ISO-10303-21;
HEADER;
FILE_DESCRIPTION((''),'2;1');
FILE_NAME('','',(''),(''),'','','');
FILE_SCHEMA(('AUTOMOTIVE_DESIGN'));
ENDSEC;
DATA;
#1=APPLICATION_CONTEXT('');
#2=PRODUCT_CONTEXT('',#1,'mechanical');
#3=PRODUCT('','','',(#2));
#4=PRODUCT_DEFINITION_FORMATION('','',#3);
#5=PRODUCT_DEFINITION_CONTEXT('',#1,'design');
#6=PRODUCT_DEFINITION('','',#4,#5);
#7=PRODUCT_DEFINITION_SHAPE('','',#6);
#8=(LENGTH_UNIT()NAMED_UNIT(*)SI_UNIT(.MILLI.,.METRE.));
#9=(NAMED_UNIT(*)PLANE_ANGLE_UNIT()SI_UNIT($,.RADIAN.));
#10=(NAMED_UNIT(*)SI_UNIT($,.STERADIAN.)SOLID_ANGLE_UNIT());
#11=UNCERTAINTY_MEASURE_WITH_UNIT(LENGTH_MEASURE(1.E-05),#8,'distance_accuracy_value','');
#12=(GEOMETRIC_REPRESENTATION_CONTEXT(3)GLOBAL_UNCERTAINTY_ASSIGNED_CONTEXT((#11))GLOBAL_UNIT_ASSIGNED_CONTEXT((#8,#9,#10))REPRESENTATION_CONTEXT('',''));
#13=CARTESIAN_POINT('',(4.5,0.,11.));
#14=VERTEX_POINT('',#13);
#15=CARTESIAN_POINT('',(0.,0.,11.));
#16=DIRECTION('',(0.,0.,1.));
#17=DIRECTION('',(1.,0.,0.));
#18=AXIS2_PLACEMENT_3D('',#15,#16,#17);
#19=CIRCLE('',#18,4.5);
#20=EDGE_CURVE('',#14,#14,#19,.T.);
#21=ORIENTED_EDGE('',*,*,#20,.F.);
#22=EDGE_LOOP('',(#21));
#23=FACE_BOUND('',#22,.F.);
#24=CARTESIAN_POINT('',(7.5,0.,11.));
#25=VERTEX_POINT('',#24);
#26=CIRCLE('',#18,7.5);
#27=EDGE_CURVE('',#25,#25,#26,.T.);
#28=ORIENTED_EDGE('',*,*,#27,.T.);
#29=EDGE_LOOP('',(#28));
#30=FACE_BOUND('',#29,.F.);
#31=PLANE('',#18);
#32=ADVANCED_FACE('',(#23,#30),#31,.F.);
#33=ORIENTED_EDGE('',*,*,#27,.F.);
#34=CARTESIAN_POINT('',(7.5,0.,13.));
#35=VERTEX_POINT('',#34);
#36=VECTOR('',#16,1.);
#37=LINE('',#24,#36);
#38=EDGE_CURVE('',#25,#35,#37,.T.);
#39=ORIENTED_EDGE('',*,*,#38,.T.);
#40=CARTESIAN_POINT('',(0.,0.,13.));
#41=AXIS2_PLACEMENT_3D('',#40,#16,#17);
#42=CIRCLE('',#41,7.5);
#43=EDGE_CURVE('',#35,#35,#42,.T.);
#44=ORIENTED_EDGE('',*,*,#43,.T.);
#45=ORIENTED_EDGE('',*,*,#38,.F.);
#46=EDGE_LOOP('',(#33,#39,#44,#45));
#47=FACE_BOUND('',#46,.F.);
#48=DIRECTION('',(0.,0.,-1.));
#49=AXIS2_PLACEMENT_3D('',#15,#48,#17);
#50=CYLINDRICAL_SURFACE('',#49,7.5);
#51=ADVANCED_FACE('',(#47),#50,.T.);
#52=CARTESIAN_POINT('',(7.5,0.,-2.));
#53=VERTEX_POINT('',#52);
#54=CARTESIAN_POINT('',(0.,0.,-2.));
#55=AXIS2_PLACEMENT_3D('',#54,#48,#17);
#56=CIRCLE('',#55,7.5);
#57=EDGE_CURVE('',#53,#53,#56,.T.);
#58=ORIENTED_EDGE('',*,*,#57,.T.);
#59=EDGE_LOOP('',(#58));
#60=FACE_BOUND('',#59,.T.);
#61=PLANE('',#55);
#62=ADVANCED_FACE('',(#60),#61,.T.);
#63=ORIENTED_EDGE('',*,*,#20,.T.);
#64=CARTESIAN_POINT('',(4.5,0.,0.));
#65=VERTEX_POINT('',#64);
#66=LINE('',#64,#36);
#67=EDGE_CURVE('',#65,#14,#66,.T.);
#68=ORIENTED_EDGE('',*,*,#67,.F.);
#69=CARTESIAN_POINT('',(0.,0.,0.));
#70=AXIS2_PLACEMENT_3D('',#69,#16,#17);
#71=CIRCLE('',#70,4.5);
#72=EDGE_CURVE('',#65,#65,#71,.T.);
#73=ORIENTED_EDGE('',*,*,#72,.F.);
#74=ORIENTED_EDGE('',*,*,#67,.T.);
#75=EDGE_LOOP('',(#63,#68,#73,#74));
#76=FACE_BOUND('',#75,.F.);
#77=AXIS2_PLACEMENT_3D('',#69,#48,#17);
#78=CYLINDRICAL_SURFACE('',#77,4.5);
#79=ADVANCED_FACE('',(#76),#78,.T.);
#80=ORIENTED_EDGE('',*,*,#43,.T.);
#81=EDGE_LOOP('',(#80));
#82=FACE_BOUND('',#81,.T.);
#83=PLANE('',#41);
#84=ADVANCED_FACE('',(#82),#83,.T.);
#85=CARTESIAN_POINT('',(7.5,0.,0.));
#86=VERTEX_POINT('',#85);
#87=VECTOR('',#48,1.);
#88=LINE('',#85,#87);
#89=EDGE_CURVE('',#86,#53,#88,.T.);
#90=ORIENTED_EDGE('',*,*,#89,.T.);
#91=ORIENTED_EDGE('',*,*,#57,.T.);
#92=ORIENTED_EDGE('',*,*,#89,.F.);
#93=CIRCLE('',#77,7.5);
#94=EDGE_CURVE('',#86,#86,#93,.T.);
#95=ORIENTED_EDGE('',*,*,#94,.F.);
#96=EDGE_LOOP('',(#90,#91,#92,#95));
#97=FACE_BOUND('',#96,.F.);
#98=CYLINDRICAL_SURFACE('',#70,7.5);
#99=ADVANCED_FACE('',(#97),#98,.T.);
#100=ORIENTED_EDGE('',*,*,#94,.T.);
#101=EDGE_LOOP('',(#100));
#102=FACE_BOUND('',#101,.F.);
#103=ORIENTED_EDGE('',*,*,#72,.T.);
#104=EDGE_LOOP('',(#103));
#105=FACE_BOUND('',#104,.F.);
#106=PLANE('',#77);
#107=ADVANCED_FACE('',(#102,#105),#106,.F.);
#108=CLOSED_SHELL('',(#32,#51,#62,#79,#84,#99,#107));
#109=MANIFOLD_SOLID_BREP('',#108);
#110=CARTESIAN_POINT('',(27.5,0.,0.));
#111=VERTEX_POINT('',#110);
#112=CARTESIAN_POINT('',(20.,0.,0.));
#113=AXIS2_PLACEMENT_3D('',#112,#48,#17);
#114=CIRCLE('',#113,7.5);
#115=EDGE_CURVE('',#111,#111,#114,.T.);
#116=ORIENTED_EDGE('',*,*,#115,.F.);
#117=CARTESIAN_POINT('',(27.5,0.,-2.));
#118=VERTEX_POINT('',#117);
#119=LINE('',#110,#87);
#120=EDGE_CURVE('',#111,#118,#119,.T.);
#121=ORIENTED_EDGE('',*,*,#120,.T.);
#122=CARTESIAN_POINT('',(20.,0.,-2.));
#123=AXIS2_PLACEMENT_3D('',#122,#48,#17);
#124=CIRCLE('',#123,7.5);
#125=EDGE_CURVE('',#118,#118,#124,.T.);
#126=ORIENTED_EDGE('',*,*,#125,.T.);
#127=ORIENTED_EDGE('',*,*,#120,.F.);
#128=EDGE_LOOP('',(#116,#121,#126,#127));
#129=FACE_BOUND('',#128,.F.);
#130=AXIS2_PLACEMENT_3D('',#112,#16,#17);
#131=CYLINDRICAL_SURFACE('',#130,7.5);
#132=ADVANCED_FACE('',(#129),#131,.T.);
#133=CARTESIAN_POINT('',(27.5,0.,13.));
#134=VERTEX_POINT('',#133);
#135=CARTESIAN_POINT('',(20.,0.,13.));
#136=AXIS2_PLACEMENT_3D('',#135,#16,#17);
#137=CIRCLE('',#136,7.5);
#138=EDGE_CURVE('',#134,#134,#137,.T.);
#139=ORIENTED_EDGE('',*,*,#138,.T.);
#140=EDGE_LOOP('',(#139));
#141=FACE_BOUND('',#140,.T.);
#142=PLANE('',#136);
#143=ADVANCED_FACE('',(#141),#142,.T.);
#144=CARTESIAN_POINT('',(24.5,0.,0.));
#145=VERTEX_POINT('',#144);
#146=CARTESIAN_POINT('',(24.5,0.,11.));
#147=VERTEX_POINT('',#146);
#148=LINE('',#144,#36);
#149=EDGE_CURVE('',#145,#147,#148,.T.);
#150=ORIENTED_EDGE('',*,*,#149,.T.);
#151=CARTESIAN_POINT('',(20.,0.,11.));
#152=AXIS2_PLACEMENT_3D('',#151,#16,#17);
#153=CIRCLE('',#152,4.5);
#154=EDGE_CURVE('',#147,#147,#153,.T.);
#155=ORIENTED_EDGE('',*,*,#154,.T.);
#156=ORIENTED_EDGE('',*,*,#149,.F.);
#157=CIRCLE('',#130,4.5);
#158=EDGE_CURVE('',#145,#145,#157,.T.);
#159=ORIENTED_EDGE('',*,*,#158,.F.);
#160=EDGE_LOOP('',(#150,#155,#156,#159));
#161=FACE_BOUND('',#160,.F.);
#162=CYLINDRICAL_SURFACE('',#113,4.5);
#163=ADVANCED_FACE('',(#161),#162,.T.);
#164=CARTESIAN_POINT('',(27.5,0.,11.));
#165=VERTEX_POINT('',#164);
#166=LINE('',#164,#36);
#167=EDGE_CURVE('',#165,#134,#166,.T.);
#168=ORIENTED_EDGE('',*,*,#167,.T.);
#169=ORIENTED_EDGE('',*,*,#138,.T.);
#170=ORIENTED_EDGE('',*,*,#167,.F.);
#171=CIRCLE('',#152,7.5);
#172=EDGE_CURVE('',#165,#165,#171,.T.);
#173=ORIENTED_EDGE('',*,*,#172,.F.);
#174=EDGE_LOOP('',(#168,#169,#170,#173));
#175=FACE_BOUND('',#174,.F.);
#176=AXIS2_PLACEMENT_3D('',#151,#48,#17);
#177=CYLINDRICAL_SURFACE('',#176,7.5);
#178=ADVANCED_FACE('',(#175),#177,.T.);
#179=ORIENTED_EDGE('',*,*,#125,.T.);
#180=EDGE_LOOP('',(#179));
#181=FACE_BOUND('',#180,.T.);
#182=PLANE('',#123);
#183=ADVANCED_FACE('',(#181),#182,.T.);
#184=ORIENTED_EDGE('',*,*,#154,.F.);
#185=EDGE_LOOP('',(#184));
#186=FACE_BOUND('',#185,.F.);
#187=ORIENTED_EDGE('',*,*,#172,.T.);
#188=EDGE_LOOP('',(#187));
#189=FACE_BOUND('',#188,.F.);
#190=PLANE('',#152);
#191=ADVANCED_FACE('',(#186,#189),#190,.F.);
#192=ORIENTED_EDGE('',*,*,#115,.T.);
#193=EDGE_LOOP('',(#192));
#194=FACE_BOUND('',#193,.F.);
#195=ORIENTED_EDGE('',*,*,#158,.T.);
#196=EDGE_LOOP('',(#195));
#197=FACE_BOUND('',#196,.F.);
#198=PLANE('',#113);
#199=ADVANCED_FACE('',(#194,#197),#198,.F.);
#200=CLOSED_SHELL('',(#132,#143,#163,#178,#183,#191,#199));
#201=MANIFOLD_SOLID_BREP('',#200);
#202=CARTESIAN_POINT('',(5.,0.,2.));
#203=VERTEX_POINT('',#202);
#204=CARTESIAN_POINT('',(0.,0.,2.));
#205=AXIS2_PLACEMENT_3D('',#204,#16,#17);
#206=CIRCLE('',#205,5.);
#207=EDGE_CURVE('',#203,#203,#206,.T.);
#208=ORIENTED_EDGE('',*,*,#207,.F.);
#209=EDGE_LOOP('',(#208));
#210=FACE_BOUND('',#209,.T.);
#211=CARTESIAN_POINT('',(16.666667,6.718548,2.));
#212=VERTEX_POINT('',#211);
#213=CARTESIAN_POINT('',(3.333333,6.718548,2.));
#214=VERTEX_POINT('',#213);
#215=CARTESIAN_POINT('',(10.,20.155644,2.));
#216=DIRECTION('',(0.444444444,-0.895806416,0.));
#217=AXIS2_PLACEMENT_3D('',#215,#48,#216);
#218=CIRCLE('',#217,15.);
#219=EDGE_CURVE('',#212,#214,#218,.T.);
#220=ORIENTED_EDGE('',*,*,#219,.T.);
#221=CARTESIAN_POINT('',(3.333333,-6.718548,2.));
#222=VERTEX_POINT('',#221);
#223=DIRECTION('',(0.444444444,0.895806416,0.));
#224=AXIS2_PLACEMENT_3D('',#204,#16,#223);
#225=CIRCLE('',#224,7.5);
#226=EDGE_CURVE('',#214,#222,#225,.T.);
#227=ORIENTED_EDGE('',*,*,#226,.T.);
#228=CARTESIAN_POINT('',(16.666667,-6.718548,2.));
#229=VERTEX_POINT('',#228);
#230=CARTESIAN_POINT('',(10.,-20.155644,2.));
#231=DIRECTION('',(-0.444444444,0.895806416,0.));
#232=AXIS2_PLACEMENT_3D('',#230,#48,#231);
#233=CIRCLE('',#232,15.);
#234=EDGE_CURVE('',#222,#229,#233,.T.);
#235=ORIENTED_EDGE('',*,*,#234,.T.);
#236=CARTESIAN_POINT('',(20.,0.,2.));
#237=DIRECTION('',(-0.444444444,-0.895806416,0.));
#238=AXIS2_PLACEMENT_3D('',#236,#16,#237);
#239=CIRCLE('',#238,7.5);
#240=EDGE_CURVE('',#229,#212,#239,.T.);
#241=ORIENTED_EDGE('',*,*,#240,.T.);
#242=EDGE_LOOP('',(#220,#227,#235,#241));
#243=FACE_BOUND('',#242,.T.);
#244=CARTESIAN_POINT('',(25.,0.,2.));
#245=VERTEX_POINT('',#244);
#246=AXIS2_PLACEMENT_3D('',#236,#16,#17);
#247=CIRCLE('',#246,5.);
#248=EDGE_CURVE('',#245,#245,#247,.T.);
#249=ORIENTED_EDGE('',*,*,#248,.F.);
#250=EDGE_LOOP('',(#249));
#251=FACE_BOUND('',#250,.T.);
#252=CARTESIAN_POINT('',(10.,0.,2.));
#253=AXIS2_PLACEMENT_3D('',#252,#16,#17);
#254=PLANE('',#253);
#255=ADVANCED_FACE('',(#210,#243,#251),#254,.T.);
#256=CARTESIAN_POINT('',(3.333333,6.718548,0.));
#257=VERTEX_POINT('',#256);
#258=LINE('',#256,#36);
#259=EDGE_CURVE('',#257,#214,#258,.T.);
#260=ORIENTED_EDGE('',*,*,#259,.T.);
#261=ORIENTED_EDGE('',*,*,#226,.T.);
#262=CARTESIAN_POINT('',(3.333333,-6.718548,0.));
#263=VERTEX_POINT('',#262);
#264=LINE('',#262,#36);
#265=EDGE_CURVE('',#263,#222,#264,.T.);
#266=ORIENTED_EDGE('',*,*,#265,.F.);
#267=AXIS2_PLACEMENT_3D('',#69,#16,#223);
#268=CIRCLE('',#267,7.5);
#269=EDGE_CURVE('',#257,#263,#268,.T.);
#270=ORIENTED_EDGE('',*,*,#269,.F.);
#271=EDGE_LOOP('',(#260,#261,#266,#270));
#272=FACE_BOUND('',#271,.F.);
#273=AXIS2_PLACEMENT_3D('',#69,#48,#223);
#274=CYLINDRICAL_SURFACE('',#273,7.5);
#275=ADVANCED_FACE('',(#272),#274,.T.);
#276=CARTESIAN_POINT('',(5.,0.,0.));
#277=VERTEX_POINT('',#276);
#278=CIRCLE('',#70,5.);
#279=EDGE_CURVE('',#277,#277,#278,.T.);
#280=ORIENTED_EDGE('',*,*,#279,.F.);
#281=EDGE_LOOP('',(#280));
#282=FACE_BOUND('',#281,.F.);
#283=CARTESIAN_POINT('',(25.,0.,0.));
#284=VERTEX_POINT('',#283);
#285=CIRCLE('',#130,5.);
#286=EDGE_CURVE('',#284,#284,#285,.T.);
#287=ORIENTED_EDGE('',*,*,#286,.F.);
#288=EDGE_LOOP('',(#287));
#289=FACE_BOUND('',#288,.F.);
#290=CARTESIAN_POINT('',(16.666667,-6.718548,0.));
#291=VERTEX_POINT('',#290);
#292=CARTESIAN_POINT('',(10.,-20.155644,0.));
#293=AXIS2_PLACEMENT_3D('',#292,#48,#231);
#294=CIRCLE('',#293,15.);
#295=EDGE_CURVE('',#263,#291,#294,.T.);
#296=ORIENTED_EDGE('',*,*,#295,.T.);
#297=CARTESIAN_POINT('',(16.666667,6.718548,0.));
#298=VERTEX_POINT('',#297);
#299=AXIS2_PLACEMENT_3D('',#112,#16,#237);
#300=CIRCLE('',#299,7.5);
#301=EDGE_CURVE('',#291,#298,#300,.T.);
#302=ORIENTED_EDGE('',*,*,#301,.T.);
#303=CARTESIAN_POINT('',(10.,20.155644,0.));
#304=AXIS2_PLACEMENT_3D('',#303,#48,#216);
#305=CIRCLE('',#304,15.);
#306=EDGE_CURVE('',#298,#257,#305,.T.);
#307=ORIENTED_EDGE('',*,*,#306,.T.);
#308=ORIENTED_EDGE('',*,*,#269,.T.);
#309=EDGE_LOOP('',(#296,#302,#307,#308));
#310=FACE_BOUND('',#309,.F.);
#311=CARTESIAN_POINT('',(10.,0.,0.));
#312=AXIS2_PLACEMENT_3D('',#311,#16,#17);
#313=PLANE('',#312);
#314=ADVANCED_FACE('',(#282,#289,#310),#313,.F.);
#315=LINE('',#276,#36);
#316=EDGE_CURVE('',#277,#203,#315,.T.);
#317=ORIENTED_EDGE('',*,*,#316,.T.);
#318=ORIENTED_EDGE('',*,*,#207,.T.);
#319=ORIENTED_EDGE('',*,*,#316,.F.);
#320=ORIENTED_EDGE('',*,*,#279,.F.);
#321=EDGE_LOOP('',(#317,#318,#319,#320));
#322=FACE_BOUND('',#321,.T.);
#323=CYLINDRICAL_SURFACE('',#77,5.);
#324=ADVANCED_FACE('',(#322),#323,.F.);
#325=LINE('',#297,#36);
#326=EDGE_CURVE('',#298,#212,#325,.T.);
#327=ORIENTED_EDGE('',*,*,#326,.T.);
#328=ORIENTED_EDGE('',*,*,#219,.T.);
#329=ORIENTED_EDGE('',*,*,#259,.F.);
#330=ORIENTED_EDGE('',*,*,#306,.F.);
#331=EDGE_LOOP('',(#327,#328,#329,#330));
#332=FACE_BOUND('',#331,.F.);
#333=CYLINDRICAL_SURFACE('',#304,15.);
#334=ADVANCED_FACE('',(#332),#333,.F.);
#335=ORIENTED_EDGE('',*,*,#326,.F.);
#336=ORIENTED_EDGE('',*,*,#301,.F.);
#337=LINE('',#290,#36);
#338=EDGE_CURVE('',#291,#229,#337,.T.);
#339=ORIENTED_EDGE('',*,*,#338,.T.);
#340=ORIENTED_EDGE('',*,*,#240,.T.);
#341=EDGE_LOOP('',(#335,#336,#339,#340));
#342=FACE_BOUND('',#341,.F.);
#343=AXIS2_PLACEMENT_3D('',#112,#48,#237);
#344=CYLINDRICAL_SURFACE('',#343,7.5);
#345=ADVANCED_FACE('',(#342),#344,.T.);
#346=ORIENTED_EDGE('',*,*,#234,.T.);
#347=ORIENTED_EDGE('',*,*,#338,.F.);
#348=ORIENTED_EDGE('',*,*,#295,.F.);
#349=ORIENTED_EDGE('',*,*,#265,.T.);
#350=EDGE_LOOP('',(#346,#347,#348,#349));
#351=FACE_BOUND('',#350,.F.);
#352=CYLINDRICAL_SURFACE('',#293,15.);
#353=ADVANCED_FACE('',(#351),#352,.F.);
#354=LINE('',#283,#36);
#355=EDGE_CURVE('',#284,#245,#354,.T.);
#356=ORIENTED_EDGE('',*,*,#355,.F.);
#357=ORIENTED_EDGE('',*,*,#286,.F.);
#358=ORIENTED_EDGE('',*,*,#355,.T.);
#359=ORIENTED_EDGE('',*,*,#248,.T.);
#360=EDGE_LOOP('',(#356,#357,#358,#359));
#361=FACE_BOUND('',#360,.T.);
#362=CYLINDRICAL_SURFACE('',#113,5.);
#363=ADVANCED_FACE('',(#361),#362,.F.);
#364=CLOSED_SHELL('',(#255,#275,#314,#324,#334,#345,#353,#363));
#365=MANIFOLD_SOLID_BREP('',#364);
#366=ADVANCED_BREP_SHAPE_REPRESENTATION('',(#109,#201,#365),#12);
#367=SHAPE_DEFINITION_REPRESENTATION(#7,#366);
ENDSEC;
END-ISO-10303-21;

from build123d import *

# Parameters (mm, degrees)
F0_R     = 5
F1_DEPTH = 2
F2_R     = 4.5
F3_DEPTH = 11
F4_R     = 7.5
F5_DEPTH = 2
F6_R     = 7.5
F7_DEPTH = 2


with BuildPart() as f1:
    # F0 (on Top) → F1 (new body)
    with BuildSketch(Plane.XY):
        with BuildLine():
            ThreePointArc((16.6666666667, 6.7185481236), (10, 5.1556443707), (3.3333333333, 6.7185481236))
            ThreePointArc((3.3333333333, 6.7185481236), (-7.5, 0), (3.3333333333, -6.7185481236))
            ThreePointArc((3.3333333333, -6.7185481236), (10, -5.1556443707), (16.6666666667, -6.7185481236))
            ThreePointArc((16.6666666667, -6.7185481236), (27.5, 0), (16.6666666667, 6.7185481236))
        make_face()
        Circle(F0_R, mode=Mode.SUBTRACT)
        with Locations((20, 0)):
            Circle(F0_R, mode=Mode.SUBTRACT)
    extrude(amount=F1_DEPTH)


with BuildPart() as f3:
    # F2 (on Top) → F3 (new body)
    with BuildSketch(Plane.XY):
        Circle(F2_R)
    extrude(amount=F3_DEPTH)

    # F4 (on face) → F5 (join)
    with BuildSketch(Plane.XY.offset(11)):
        Circle(F4_R)
    extrude(amount=F5_DEPTH)

    # F6 (on face) → F7 (join)
    with BuildSketch(Plane(origin=(0, 0, 0), x_dir=(1, 0, 0), z_dir=(0, 0, -1))):
        Circle(F6_R)
    extrude(amount=F7_DEPTH)


with BuildPart() as f3b:
    # F2 (on Top) → F3, piece 2 (new body)
    with BuildSketch(Plane.XY):
        with Locations((20, 0)):
            Circle(F2_R)
    extrude(amount=F3_DEPTH)

    # F4 (on face) → F5, piece 2 (join)
    with BuildSketch(Plane.XY.offset(11)):
        with Locations((20, 0)):
            Circle(F4_R)
    extrude(amount=F5_DEPTH)

    # F6 (on face) → F7, piece 2 (join)
    with BuildSketch(Plane(origin=(0, 0, 0), x_dir=(1, 0, 0), z_dir=(0, 0, -1))):
        with Locations((20, 0)):
            Circle(F6_R)
    extrude(amount=F7_DEPTH)


solid = Compound([f1.part, f3.part, f3b.part])
